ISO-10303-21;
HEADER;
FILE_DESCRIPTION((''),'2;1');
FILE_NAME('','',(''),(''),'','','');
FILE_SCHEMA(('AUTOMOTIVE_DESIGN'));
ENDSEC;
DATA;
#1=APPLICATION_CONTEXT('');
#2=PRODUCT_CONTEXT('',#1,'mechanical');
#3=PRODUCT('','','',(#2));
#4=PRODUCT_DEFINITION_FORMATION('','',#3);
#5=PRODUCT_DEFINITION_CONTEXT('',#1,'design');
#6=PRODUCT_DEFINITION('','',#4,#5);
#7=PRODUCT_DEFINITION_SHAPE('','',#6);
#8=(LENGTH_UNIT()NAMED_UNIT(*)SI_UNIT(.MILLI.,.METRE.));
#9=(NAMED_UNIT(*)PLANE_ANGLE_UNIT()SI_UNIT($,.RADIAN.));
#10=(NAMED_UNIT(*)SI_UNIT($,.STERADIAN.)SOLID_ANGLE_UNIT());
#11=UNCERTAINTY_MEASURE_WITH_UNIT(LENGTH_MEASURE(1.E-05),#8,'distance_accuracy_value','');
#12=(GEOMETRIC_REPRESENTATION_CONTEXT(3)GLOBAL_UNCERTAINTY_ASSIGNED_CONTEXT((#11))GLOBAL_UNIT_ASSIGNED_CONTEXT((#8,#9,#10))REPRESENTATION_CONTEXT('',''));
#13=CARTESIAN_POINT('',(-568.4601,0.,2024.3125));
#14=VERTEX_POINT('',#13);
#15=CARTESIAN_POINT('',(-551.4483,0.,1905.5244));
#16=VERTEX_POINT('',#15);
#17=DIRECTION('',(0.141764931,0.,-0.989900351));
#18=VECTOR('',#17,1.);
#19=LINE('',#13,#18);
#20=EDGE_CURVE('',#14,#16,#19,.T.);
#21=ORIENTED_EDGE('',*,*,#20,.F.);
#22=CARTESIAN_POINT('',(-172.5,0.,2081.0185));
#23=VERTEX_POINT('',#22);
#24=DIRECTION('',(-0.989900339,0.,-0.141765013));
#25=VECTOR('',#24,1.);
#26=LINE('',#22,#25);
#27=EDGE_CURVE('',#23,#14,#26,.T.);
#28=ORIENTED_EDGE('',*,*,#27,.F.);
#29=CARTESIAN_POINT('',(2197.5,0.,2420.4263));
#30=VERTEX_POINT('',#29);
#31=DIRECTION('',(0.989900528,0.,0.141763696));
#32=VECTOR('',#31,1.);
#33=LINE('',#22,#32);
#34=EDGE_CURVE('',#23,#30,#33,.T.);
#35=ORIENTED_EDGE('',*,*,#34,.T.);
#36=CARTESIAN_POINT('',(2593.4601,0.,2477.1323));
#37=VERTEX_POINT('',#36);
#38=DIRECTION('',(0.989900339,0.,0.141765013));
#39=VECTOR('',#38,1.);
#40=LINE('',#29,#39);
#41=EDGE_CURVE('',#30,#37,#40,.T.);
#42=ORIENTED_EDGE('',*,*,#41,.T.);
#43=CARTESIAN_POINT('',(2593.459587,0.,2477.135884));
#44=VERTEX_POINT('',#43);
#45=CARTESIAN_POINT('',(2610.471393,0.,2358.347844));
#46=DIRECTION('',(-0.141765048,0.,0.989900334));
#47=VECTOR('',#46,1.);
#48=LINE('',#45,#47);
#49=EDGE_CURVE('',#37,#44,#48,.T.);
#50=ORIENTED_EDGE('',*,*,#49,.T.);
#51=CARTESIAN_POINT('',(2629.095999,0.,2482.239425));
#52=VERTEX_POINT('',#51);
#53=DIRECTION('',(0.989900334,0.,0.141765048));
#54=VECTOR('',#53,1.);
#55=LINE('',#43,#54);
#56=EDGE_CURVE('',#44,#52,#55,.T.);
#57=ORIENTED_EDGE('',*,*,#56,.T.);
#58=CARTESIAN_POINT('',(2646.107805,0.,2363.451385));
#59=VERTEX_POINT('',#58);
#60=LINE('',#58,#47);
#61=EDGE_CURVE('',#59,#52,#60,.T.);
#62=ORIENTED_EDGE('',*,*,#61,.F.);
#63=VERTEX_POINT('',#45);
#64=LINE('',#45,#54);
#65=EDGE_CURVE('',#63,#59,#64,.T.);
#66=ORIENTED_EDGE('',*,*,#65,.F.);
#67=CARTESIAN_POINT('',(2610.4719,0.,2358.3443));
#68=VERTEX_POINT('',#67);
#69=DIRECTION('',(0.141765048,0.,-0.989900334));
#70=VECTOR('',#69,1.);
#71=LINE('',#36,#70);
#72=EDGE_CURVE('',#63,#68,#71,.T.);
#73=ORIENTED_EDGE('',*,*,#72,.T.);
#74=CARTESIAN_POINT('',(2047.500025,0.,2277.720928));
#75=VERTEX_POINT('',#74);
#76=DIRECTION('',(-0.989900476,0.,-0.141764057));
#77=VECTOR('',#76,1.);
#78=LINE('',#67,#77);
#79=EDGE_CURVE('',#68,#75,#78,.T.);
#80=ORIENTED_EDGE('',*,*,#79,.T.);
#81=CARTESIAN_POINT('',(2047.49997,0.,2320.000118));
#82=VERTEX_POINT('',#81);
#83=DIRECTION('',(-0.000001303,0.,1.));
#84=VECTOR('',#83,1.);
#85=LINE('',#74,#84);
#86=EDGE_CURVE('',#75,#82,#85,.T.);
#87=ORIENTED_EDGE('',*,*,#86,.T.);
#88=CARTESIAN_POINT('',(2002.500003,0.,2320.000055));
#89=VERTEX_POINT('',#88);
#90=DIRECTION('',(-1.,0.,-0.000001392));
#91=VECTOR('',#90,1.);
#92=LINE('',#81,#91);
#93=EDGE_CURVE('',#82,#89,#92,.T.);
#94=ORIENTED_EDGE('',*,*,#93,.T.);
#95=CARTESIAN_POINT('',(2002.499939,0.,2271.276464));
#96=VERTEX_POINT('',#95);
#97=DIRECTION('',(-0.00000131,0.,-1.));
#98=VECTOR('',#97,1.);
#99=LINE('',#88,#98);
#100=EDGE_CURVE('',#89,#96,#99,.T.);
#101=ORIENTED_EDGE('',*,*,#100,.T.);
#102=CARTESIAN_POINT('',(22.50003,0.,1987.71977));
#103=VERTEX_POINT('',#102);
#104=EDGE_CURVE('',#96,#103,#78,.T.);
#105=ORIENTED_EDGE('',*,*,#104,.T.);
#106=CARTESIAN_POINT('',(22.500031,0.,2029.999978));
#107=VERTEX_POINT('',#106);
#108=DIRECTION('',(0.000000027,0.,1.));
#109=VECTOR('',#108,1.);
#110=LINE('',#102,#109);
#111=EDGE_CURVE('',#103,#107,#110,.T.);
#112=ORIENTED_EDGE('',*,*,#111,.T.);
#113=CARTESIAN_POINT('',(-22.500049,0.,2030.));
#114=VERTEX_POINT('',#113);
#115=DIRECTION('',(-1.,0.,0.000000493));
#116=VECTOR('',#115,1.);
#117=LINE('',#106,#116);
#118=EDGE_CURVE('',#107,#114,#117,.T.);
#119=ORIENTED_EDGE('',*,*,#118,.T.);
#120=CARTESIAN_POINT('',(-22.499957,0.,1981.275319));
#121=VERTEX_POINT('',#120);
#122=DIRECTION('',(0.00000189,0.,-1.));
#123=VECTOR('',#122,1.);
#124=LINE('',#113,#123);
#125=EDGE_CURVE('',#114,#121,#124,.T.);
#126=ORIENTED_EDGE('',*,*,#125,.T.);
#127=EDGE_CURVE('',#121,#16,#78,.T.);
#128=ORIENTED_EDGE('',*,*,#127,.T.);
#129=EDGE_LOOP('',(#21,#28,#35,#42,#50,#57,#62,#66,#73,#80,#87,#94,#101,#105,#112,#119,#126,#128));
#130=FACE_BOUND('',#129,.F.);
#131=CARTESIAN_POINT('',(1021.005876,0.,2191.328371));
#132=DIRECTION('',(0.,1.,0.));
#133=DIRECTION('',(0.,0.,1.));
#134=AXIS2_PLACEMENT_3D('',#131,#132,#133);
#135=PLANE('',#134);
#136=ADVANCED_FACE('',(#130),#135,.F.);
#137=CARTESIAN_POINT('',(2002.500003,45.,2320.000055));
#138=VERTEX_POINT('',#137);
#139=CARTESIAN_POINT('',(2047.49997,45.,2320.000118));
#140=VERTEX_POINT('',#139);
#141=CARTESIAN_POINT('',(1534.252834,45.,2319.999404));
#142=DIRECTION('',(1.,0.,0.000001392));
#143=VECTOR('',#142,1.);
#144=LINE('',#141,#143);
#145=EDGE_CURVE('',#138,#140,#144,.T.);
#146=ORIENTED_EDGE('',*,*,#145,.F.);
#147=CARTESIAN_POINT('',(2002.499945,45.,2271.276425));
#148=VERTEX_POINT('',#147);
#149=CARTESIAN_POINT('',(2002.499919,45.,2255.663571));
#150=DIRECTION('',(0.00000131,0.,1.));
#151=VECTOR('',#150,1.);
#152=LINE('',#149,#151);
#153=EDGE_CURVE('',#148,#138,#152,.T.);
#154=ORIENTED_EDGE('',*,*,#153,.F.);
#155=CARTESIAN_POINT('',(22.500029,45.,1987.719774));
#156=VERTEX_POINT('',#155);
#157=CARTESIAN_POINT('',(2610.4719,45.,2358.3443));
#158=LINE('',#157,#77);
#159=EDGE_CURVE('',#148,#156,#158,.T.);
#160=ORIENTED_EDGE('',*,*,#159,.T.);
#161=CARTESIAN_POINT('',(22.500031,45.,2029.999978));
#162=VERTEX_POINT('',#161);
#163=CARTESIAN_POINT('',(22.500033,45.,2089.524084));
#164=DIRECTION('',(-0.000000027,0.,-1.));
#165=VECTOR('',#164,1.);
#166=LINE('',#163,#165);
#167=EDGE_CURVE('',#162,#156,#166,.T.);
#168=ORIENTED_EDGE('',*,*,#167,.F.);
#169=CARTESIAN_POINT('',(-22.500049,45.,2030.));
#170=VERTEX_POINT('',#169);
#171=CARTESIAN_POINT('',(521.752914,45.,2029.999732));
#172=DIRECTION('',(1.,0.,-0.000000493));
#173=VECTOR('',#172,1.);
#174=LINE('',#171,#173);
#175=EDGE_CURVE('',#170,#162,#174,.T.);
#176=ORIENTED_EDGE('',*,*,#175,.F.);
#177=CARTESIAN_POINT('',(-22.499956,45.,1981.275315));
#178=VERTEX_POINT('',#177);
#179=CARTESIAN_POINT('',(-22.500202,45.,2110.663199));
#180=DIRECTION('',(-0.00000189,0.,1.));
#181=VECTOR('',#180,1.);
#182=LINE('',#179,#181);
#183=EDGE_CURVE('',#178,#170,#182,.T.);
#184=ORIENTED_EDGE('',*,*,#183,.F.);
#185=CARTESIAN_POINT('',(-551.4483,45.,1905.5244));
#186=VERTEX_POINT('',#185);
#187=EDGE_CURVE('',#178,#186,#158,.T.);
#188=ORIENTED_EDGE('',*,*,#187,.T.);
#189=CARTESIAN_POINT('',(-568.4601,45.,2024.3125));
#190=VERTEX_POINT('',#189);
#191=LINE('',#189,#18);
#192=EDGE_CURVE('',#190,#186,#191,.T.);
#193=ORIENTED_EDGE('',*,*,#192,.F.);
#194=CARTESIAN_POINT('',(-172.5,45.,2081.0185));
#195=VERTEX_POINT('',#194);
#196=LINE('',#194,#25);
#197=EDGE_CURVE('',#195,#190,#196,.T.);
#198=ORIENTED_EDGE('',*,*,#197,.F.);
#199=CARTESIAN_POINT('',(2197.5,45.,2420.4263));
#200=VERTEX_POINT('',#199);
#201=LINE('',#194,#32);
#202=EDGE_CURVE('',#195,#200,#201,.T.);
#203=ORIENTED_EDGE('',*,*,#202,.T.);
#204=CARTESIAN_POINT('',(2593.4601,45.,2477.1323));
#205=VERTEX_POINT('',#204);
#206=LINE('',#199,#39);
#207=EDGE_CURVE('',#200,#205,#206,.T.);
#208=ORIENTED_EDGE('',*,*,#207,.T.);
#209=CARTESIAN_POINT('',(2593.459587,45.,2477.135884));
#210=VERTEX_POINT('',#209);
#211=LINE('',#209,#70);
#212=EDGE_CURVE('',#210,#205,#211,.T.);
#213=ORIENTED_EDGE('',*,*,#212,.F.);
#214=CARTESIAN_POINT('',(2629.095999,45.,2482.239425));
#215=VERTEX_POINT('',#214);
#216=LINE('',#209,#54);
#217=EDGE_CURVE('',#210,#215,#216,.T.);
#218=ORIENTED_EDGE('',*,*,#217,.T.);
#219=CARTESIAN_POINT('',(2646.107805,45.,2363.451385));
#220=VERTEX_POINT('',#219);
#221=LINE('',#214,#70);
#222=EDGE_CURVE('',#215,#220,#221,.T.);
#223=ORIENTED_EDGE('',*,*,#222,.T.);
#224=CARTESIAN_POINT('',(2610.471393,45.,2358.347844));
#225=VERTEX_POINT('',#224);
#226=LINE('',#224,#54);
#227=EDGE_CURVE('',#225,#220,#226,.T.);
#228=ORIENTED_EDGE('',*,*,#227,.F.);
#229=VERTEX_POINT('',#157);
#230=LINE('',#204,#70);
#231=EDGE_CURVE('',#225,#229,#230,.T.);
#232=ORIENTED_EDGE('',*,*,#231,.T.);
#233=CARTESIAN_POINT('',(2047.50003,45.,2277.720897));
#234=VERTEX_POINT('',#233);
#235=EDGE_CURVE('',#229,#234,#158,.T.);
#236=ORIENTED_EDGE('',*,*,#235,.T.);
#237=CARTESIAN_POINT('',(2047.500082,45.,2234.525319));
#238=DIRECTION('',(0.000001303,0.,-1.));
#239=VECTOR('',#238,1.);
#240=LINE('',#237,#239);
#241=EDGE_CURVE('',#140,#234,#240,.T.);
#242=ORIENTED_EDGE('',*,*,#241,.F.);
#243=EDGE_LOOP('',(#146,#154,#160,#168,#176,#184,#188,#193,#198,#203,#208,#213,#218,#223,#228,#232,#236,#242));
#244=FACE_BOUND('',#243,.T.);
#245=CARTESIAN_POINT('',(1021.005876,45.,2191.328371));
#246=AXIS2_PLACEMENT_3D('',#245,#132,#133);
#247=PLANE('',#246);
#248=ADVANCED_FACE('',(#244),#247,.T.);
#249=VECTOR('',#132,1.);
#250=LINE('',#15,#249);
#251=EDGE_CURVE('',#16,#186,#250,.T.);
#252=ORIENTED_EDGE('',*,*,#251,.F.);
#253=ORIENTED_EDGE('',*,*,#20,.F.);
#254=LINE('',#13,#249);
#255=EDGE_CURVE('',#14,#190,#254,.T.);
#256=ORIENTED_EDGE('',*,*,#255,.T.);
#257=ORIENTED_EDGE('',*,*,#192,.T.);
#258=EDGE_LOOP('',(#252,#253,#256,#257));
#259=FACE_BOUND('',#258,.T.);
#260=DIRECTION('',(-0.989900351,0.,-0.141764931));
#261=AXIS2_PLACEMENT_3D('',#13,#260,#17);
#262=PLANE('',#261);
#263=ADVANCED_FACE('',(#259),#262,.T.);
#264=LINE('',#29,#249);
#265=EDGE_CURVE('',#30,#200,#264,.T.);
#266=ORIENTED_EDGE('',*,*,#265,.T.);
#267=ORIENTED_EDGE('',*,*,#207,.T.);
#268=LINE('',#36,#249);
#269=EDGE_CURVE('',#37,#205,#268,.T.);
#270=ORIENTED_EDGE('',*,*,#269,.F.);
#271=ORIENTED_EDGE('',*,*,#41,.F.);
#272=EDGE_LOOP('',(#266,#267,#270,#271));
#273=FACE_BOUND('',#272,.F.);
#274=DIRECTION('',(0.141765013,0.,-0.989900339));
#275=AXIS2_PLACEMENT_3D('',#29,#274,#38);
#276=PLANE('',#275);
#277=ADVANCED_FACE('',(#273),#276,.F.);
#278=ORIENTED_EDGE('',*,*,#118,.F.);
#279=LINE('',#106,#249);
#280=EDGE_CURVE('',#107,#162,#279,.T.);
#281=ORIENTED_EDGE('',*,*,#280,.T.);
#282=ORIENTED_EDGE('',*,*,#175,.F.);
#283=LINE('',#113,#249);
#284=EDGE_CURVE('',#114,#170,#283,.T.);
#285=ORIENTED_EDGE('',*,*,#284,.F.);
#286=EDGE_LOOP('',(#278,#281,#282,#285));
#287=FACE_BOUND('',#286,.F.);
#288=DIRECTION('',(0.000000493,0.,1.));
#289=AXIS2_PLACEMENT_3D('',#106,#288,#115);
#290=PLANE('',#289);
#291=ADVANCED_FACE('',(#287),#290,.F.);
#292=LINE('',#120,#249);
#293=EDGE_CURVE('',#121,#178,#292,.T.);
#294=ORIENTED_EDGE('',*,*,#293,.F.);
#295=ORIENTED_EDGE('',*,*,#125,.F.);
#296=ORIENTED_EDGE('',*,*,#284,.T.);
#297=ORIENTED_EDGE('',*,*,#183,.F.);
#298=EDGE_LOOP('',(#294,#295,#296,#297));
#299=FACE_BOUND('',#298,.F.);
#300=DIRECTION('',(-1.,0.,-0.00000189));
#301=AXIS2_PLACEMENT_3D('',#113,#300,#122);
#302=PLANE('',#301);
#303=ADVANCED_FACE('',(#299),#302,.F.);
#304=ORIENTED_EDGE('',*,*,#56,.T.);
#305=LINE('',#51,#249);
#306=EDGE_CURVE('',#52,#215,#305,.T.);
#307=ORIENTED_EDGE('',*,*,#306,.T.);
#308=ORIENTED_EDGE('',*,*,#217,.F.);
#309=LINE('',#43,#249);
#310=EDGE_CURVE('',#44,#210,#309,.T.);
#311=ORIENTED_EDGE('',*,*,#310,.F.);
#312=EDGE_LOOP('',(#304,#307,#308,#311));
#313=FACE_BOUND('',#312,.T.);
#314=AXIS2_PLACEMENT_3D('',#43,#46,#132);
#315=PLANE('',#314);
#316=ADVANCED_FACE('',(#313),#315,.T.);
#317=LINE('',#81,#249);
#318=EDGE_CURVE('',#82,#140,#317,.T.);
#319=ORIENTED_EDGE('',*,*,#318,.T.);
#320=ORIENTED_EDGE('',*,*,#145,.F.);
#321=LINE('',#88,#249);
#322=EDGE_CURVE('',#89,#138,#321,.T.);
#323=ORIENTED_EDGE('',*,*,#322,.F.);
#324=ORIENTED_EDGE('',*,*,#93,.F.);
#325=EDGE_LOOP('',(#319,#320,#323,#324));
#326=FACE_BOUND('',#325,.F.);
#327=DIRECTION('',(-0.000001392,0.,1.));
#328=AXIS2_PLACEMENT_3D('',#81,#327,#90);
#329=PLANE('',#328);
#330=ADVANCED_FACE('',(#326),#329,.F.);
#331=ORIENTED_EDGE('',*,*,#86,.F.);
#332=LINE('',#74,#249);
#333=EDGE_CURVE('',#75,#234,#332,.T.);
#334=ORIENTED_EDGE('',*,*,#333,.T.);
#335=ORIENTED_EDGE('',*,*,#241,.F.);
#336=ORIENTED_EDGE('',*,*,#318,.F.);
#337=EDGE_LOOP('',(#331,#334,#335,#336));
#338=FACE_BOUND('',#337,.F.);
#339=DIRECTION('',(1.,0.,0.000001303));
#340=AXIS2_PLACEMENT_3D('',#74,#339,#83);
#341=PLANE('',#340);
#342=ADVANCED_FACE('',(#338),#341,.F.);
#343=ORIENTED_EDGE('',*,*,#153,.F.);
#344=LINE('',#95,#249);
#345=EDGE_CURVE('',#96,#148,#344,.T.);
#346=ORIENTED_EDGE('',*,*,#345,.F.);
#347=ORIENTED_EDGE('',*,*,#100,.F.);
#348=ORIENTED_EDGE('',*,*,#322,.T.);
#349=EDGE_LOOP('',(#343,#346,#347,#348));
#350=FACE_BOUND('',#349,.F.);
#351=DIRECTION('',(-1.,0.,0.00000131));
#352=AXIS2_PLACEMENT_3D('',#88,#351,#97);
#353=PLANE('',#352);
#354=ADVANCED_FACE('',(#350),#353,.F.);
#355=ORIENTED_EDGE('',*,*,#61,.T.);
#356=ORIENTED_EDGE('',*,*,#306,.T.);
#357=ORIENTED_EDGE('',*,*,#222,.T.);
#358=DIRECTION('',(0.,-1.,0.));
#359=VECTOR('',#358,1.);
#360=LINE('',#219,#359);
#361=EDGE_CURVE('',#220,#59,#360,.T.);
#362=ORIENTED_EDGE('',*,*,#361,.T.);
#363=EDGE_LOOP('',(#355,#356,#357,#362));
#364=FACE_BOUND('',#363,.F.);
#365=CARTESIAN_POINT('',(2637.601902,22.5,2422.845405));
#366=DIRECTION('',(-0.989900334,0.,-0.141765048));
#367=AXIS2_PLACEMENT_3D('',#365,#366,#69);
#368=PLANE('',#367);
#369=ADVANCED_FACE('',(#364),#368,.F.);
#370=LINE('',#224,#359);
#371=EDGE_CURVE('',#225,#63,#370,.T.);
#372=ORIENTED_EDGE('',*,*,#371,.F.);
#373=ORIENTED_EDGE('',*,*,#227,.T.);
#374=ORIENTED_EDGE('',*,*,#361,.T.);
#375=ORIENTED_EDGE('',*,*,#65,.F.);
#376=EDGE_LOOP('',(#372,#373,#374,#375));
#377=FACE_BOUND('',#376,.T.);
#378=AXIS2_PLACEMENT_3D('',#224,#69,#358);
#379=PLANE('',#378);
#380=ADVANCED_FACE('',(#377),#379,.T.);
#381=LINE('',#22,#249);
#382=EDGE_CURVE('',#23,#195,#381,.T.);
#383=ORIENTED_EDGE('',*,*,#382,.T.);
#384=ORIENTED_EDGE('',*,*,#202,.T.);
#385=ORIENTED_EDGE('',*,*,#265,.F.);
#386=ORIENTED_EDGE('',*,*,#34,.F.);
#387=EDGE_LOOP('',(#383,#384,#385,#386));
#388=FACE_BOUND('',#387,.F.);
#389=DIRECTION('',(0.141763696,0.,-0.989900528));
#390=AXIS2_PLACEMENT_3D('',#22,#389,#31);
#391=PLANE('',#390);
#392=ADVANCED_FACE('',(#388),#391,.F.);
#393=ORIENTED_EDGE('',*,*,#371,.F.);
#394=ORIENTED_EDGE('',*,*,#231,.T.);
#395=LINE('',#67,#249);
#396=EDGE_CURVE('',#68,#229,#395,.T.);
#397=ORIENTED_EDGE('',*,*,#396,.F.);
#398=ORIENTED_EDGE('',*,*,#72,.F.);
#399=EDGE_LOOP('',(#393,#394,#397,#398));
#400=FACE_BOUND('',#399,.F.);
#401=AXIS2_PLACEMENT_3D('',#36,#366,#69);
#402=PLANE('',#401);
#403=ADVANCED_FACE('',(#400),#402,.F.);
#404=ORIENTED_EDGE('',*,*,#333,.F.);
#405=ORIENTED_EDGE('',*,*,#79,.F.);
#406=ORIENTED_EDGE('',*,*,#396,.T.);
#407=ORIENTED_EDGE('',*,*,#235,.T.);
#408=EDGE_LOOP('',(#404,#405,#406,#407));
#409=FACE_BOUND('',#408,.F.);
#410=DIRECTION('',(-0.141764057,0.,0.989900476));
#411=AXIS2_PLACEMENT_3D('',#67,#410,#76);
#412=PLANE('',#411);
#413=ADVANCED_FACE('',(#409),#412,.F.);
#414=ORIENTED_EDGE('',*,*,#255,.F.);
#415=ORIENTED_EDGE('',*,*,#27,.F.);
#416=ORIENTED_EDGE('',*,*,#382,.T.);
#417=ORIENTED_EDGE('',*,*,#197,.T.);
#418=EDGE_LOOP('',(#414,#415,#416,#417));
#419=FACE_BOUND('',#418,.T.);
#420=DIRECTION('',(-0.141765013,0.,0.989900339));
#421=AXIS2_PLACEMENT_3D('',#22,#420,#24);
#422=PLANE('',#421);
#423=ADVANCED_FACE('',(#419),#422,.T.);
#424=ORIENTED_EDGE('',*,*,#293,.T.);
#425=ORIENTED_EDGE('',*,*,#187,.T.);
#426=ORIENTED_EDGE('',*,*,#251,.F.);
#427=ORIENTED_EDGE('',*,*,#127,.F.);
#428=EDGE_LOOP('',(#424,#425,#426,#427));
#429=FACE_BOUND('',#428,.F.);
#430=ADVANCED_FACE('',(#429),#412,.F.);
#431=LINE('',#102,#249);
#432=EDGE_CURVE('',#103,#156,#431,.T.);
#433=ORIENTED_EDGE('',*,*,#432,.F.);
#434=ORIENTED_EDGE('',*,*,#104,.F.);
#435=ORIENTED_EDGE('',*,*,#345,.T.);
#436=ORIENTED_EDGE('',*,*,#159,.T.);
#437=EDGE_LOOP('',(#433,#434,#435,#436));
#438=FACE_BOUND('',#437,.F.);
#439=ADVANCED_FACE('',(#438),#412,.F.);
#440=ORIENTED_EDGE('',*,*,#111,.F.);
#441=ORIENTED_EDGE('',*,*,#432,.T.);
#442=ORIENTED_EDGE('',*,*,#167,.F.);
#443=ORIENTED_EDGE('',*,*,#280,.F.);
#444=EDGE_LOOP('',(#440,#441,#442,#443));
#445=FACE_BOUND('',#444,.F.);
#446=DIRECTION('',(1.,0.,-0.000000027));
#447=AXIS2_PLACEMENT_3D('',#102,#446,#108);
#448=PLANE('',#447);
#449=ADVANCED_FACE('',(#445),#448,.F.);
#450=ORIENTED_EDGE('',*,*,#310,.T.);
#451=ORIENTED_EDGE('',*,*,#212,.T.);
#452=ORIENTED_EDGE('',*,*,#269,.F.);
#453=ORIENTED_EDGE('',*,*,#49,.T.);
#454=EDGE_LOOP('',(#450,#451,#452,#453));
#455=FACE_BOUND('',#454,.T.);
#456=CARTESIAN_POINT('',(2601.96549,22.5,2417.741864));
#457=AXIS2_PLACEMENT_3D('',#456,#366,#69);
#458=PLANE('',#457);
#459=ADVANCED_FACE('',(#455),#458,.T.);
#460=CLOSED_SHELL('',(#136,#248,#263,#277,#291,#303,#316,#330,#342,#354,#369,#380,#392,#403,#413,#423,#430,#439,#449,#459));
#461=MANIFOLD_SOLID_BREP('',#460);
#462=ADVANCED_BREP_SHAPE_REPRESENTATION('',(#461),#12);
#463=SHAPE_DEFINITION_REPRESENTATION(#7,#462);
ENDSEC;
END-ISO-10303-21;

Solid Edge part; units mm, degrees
sketch "Sketch1" plane through (0, 0, 0) normal (0, -1, 0) x (1, 0, 0)
  line L0 (-172.5, 2081.0185) -> (2197.5, 2420.4263)
  line L1 (2197.5, 2420.4263) -> (2593.4601, 2477.1323)
  line L2 (2593.4601, 2477.1323) -> (2610.4719, 2358.3443)
  line L3 (2610.4719, 2358.3443) -> (-551.4483, 1905.5244)
  line L4 (-568.4601, 2024.3125) -> (-551.4483, 1905.5244)
  line L5 (-172.5, 2081.0185) -> (-568.4601, 2024.3125)
extrude "Protrusion1" add sketch "Sketch1" against normal blind 45
sketch "Sketch2" plane through (1021.0059, 0, 2191.3284) normal (0, -1, 0) x (0.9899005, 0, 0.1417637)
  line L0 (1034.368, -18.1474) -> (989.8225, -11.7681)
  line L1 (989.8225, -11.7681) -> (982.9152, -59.9996)
  line L2 (982.9152, -59.9996) -> (1028.3744, -59.9996)
  line L3 (1028.3744, -59.9996) -> (1034.368, -18.1474)
  line L4 (-1011.292, -18.1472) -> (-1055.8376, -11.7678)
  line L5 (-1055.8376, -11.7678) -> (-1062.7449, -60.0004)
  line L6 (-1062.7449, -60.0004) -> (-1017.2858, -60.0004)
  line L7 (-1017.2858, -60.0004) -> (-1011.292, -18.1472)
extrude "ExtrudedCutout_1" cut sketch "Sketch2" against normal blind 99.8305
sketch "Sketch3" plane through (2601.966, 22.5, 2417.7383) normal (0.9899003, 0, 0.1417651) x (0, 1, 0)
  line L0 (-22.5, 60.0036) -> (22.5, 60.0036)
  line L1 (22.5, 60.0036) -> (22.5, -59.9964)
  line L2 (22.5, -59.9964) -> (-22.5, -59.9964)
  line L3 (-22.5, -59.9964) -> (-22.5, 60.0036)
extrude "ExtrudedProtrusion_4" add sketch "Sketch3" along normal blind 36
properties material "Wood, Pine"
